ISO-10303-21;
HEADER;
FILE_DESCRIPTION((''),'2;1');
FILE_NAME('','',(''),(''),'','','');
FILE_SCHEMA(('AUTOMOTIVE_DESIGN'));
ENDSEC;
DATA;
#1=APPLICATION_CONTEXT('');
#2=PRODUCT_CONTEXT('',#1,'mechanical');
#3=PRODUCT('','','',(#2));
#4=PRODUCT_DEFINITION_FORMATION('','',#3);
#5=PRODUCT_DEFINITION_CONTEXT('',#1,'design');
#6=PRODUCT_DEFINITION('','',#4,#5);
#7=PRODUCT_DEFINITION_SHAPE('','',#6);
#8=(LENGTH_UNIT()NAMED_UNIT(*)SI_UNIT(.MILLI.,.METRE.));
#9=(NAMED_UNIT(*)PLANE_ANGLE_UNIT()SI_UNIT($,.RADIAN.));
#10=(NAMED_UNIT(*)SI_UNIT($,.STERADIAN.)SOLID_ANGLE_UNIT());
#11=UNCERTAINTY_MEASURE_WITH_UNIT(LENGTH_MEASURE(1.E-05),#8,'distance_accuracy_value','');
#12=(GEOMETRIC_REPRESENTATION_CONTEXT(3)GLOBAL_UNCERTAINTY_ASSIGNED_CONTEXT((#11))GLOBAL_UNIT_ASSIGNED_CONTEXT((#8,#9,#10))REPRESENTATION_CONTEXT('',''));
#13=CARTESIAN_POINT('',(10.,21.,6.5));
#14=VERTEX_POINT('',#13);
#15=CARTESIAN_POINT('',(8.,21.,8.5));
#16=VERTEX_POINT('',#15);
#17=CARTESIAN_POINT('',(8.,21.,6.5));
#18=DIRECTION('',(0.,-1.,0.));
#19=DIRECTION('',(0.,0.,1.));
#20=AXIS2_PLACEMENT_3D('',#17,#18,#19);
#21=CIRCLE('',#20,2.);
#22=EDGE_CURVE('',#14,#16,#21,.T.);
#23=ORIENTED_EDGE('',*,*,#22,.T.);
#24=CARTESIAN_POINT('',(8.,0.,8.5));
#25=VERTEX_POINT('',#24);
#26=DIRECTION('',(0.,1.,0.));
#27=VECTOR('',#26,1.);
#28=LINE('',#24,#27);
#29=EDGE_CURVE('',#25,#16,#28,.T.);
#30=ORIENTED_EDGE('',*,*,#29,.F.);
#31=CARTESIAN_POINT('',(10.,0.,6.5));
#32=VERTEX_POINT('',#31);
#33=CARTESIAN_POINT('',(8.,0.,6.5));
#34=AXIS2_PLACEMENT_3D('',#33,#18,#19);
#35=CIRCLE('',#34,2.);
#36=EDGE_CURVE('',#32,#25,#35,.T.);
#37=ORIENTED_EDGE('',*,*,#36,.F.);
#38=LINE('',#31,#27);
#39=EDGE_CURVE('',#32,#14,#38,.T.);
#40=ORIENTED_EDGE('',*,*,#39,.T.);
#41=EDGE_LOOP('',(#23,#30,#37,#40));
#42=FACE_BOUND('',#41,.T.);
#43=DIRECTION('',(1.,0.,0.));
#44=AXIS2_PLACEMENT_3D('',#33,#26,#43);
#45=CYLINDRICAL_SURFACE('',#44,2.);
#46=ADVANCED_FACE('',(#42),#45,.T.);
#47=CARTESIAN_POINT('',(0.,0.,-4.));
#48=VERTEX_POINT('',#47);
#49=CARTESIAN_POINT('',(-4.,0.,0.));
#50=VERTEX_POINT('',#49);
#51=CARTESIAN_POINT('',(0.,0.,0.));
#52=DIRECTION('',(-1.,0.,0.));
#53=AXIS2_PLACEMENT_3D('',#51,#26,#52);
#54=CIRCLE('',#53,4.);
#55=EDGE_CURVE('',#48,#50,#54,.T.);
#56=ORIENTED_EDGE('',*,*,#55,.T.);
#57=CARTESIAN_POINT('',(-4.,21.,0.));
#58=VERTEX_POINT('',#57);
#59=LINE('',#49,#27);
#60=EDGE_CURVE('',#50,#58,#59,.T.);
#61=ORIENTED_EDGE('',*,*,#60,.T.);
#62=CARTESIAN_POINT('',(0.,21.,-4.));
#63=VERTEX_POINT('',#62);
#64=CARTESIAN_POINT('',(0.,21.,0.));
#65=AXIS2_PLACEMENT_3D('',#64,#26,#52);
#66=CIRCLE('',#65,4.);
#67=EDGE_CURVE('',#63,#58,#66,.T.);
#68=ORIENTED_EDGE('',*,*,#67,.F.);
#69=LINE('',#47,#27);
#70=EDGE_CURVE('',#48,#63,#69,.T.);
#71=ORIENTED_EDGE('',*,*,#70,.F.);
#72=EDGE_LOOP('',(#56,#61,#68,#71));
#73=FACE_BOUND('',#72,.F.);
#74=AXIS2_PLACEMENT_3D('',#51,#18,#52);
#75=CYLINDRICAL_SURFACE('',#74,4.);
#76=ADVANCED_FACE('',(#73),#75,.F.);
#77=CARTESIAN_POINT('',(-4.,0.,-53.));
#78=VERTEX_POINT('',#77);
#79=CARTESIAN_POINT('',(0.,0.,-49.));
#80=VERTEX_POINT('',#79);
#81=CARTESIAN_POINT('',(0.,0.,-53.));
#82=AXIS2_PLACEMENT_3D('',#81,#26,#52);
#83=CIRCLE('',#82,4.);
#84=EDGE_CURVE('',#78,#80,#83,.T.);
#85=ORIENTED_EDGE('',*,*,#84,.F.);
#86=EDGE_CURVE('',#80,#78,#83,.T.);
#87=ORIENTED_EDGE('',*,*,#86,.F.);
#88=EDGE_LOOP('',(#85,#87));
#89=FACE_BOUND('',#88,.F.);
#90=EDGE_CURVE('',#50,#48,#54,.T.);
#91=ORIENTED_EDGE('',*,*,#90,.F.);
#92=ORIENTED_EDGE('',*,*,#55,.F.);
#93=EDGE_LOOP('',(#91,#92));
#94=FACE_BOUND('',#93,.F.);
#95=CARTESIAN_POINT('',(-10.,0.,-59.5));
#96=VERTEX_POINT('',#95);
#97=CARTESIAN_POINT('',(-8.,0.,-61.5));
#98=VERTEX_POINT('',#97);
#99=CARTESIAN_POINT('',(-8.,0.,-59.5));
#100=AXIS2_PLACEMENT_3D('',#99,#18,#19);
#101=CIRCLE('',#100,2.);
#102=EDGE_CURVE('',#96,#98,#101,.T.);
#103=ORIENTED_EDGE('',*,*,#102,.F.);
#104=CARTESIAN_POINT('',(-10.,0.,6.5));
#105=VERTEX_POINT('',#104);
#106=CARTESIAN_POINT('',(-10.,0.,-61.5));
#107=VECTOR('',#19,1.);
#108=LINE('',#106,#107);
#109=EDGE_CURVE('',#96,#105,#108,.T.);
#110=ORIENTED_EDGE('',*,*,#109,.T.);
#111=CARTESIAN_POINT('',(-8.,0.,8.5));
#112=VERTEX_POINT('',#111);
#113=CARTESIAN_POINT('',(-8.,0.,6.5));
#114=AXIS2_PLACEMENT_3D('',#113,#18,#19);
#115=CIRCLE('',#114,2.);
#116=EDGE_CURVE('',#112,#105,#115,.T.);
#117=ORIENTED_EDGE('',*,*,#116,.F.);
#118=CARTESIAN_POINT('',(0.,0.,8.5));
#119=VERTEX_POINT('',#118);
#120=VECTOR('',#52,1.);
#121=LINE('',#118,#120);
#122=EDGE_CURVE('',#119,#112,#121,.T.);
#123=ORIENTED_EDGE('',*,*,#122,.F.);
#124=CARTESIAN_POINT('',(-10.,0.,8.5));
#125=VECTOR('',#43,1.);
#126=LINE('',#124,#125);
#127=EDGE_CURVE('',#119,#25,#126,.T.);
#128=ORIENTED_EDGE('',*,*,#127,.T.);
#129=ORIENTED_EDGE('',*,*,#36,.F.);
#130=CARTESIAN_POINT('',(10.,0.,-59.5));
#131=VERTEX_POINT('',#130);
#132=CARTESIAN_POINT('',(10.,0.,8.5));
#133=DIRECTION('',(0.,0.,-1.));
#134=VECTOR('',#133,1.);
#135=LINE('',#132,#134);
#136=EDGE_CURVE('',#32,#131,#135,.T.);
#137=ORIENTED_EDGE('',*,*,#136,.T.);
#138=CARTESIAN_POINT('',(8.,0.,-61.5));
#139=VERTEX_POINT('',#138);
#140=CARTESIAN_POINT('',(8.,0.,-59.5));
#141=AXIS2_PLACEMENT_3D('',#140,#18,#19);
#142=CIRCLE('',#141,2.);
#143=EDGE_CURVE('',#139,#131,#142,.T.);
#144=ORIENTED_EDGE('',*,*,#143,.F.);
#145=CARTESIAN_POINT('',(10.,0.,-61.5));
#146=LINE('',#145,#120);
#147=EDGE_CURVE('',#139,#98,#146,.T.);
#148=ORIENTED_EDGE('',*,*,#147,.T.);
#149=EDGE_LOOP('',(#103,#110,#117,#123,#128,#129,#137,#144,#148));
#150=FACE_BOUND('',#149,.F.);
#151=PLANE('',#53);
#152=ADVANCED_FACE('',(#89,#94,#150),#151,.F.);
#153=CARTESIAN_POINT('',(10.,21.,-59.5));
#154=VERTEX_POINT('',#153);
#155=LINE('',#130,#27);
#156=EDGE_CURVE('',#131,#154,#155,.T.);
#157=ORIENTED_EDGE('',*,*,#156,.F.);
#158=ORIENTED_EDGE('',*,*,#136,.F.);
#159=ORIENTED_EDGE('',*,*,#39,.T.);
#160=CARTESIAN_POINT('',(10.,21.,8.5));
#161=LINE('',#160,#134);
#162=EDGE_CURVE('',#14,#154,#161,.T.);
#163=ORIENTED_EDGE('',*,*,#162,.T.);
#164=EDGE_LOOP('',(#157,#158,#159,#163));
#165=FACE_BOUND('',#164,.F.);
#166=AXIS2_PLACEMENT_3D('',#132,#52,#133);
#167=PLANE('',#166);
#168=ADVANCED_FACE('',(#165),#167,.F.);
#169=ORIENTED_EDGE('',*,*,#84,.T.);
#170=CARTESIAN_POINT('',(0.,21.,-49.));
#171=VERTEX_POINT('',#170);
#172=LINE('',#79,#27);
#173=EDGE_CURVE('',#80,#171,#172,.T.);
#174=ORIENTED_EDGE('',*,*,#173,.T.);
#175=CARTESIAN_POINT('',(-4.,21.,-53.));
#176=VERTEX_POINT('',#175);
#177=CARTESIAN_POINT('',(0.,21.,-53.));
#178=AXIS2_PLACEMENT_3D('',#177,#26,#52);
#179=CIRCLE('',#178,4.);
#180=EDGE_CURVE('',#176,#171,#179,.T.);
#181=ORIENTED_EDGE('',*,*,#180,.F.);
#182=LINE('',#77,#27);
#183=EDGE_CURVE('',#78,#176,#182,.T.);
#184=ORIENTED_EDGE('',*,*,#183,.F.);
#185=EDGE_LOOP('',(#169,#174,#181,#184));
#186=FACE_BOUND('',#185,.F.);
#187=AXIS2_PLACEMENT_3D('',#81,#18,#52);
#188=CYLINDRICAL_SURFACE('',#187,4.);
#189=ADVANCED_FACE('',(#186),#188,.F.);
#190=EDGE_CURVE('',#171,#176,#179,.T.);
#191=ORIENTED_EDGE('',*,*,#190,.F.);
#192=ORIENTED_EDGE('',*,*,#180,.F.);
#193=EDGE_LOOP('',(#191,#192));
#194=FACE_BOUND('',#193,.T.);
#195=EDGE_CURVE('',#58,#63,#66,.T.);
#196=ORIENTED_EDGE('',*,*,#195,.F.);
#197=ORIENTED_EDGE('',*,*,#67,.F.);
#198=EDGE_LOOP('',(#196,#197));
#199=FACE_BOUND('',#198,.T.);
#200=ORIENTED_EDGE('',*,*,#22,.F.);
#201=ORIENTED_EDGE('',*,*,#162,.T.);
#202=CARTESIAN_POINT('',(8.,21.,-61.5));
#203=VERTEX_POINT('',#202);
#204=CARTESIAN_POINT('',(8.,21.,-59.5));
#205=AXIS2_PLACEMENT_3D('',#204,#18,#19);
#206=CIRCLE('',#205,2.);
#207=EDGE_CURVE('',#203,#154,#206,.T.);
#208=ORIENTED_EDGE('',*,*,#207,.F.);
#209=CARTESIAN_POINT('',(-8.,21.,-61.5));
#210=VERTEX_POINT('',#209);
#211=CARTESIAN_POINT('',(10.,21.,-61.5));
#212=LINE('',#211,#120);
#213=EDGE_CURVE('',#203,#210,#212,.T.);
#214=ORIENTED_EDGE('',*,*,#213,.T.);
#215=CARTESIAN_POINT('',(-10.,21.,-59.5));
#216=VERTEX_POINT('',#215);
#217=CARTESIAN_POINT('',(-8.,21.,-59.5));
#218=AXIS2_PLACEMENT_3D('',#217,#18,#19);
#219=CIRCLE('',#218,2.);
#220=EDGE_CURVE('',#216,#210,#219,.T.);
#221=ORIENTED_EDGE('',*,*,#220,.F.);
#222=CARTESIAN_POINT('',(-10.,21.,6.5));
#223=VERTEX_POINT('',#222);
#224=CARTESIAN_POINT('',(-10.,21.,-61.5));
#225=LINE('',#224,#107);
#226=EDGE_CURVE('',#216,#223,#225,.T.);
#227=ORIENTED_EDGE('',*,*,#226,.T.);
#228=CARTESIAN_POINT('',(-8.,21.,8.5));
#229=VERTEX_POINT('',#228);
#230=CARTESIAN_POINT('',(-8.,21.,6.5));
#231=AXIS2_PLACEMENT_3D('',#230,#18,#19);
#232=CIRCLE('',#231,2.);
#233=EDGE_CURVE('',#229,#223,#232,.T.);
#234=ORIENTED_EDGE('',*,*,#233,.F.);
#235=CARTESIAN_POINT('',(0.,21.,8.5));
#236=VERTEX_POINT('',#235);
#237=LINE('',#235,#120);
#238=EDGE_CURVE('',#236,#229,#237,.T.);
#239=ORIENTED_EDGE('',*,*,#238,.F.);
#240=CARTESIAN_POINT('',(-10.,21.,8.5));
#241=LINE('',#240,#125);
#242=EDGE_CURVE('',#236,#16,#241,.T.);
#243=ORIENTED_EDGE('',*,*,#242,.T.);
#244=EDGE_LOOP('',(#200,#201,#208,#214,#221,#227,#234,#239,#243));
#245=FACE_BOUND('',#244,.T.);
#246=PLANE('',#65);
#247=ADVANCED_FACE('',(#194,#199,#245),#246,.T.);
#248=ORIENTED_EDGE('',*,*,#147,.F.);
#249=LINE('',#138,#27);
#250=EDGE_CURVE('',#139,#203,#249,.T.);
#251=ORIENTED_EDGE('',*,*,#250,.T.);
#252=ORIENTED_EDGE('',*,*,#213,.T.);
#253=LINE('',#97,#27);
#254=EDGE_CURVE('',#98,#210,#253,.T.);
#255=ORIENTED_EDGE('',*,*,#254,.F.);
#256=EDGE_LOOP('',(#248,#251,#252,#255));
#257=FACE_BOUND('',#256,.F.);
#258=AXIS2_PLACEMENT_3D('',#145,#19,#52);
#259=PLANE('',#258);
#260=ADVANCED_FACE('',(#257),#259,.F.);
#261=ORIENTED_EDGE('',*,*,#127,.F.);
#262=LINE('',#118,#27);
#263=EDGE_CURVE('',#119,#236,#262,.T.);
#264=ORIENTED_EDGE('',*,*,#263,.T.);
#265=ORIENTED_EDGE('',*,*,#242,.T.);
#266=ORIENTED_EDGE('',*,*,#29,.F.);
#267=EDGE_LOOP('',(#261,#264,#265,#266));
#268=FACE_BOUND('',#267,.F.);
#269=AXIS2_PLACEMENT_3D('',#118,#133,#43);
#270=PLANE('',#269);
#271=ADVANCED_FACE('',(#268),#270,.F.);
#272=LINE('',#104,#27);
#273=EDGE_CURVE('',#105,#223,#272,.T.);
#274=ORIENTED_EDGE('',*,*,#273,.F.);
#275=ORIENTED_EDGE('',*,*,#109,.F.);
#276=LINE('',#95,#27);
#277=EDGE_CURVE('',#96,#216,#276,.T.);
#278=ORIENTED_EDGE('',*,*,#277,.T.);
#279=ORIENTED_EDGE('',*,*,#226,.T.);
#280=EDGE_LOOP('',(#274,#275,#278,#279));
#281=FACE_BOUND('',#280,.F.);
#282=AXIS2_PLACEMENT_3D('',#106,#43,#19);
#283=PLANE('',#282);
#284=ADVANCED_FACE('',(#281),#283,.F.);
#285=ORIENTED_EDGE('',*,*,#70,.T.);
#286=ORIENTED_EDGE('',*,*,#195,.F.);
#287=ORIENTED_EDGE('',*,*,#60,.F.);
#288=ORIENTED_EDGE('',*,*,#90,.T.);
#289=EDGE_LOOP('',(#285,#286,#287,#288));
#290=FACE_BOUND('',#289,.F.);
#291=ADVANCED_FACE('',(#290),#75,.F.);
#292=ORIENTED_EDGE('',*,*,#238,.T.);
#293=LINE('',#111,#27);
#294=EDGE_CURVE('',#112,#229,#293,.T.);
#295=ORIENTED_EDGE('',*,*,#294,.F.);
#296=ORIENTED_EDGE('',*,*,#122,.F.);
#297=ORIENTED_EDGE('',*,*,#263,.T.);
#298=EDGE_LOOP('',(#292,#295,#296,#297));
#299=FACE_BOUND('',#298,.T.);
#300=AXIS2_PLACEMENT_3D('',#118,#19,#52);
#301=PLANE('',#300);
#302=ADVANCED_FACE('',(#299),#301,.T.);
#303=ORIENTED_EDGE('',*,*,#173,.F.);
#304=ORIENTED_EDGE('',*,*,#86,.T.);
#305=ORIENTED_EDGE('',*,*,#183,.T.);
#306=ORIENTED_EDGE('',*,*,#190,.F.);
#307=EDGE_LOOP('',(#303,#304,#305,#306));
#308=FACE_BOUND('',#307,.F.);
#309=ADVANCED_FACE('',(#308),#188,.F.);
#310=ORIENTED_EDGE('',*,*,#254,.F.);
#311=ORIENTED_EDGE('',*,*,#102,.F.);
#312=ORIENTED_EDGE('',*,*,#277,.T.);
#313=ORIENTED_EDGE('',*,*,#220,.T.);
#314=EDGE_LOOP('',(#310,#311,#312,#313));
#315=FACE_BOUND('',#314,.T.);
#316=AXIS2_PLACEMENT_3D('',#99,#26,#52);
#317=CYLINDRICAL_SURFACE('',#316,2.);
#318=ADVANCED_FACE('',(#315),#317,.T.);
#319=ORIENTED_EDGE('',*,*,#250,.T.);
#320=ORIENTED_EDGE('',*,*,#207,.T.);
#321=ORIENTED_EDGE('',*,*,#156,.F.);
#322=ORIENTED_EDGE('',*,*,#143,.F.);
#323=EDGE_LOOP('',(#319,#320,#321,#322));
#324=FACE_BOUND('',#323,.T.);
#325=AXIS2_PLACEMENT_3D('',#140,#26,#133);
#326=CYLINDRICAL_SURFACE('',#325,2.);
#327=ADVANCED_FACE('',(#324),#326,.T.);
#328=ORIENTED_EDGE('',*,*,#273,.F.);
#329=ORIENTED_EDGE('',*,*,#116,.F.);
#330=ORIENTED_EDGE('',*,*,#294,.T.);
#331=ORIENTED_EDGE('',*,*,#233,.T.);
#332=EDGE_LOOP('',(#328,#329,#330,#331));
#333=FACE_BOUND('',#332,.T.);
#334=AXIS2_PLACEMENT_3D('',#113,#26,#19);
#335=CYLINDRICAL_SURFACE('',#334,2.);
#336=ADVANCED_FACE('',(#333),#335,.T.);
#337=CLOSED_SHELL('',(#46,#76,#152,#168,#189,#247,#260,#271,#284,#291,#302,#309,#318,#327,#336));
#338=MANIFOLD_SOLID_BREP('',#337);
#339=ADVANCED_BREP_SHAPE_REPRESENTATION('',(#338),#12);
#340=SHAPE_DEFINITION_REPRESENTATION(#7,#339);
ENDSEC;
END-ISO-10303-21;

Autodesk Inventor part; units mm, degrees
ref_plane "YZ Plane" through (0, 0, 0) normal (1, 0, 0) x (0, 1, 0)
ref_plane "XZ Plane" through (0, 0, 0) normal (0, 1, 0) x (-1, 0, 0)
ref_plane "XY Plane" through (0, 0, 0) normal (0, 0, 1) x (1, 0, 0)
sketch "Sketch1" plane through (0, 0, 0) normal (0, 1, 0) x (-1, 0, 0)
  line L0 (0, 0) -> (0, -53)
  circle A0 centre (0, 0) radius 4
  circle A1 centre (0, -53) radius 4
  line L1 (0, 8.5) -> (10, 8.5)
  line L2 (10, 8.5) -> (-10, 8.5)
  line L3 (-10, 8.5) -> (-10, -61.5)
  line L4 (-10, -61.5) -> (10, -61.5)
  line L5 (10, -61.5) -> (10, 8.5)
  dimension "d0" = 53
  dimension "d1" = 8
  dimension "d2" = 8
  dimension "d3" = 8.5
  dimension "d4" = 10
  dimension "d8" = 10
  dimension "d9" = 10
  dimension "d10" = 70
extrude "Extrusion1" add sketch "Sketch1" along normal blind 21
fillet "Fillet1" radius 2 4 edges at (10, 10.5, 8.5) (-10, 10.5, 8.5) (10, 10.5, -61.5) (-10, 10.5, -61.5)
properties part number "Bearing Seats 10mm (Short)"
